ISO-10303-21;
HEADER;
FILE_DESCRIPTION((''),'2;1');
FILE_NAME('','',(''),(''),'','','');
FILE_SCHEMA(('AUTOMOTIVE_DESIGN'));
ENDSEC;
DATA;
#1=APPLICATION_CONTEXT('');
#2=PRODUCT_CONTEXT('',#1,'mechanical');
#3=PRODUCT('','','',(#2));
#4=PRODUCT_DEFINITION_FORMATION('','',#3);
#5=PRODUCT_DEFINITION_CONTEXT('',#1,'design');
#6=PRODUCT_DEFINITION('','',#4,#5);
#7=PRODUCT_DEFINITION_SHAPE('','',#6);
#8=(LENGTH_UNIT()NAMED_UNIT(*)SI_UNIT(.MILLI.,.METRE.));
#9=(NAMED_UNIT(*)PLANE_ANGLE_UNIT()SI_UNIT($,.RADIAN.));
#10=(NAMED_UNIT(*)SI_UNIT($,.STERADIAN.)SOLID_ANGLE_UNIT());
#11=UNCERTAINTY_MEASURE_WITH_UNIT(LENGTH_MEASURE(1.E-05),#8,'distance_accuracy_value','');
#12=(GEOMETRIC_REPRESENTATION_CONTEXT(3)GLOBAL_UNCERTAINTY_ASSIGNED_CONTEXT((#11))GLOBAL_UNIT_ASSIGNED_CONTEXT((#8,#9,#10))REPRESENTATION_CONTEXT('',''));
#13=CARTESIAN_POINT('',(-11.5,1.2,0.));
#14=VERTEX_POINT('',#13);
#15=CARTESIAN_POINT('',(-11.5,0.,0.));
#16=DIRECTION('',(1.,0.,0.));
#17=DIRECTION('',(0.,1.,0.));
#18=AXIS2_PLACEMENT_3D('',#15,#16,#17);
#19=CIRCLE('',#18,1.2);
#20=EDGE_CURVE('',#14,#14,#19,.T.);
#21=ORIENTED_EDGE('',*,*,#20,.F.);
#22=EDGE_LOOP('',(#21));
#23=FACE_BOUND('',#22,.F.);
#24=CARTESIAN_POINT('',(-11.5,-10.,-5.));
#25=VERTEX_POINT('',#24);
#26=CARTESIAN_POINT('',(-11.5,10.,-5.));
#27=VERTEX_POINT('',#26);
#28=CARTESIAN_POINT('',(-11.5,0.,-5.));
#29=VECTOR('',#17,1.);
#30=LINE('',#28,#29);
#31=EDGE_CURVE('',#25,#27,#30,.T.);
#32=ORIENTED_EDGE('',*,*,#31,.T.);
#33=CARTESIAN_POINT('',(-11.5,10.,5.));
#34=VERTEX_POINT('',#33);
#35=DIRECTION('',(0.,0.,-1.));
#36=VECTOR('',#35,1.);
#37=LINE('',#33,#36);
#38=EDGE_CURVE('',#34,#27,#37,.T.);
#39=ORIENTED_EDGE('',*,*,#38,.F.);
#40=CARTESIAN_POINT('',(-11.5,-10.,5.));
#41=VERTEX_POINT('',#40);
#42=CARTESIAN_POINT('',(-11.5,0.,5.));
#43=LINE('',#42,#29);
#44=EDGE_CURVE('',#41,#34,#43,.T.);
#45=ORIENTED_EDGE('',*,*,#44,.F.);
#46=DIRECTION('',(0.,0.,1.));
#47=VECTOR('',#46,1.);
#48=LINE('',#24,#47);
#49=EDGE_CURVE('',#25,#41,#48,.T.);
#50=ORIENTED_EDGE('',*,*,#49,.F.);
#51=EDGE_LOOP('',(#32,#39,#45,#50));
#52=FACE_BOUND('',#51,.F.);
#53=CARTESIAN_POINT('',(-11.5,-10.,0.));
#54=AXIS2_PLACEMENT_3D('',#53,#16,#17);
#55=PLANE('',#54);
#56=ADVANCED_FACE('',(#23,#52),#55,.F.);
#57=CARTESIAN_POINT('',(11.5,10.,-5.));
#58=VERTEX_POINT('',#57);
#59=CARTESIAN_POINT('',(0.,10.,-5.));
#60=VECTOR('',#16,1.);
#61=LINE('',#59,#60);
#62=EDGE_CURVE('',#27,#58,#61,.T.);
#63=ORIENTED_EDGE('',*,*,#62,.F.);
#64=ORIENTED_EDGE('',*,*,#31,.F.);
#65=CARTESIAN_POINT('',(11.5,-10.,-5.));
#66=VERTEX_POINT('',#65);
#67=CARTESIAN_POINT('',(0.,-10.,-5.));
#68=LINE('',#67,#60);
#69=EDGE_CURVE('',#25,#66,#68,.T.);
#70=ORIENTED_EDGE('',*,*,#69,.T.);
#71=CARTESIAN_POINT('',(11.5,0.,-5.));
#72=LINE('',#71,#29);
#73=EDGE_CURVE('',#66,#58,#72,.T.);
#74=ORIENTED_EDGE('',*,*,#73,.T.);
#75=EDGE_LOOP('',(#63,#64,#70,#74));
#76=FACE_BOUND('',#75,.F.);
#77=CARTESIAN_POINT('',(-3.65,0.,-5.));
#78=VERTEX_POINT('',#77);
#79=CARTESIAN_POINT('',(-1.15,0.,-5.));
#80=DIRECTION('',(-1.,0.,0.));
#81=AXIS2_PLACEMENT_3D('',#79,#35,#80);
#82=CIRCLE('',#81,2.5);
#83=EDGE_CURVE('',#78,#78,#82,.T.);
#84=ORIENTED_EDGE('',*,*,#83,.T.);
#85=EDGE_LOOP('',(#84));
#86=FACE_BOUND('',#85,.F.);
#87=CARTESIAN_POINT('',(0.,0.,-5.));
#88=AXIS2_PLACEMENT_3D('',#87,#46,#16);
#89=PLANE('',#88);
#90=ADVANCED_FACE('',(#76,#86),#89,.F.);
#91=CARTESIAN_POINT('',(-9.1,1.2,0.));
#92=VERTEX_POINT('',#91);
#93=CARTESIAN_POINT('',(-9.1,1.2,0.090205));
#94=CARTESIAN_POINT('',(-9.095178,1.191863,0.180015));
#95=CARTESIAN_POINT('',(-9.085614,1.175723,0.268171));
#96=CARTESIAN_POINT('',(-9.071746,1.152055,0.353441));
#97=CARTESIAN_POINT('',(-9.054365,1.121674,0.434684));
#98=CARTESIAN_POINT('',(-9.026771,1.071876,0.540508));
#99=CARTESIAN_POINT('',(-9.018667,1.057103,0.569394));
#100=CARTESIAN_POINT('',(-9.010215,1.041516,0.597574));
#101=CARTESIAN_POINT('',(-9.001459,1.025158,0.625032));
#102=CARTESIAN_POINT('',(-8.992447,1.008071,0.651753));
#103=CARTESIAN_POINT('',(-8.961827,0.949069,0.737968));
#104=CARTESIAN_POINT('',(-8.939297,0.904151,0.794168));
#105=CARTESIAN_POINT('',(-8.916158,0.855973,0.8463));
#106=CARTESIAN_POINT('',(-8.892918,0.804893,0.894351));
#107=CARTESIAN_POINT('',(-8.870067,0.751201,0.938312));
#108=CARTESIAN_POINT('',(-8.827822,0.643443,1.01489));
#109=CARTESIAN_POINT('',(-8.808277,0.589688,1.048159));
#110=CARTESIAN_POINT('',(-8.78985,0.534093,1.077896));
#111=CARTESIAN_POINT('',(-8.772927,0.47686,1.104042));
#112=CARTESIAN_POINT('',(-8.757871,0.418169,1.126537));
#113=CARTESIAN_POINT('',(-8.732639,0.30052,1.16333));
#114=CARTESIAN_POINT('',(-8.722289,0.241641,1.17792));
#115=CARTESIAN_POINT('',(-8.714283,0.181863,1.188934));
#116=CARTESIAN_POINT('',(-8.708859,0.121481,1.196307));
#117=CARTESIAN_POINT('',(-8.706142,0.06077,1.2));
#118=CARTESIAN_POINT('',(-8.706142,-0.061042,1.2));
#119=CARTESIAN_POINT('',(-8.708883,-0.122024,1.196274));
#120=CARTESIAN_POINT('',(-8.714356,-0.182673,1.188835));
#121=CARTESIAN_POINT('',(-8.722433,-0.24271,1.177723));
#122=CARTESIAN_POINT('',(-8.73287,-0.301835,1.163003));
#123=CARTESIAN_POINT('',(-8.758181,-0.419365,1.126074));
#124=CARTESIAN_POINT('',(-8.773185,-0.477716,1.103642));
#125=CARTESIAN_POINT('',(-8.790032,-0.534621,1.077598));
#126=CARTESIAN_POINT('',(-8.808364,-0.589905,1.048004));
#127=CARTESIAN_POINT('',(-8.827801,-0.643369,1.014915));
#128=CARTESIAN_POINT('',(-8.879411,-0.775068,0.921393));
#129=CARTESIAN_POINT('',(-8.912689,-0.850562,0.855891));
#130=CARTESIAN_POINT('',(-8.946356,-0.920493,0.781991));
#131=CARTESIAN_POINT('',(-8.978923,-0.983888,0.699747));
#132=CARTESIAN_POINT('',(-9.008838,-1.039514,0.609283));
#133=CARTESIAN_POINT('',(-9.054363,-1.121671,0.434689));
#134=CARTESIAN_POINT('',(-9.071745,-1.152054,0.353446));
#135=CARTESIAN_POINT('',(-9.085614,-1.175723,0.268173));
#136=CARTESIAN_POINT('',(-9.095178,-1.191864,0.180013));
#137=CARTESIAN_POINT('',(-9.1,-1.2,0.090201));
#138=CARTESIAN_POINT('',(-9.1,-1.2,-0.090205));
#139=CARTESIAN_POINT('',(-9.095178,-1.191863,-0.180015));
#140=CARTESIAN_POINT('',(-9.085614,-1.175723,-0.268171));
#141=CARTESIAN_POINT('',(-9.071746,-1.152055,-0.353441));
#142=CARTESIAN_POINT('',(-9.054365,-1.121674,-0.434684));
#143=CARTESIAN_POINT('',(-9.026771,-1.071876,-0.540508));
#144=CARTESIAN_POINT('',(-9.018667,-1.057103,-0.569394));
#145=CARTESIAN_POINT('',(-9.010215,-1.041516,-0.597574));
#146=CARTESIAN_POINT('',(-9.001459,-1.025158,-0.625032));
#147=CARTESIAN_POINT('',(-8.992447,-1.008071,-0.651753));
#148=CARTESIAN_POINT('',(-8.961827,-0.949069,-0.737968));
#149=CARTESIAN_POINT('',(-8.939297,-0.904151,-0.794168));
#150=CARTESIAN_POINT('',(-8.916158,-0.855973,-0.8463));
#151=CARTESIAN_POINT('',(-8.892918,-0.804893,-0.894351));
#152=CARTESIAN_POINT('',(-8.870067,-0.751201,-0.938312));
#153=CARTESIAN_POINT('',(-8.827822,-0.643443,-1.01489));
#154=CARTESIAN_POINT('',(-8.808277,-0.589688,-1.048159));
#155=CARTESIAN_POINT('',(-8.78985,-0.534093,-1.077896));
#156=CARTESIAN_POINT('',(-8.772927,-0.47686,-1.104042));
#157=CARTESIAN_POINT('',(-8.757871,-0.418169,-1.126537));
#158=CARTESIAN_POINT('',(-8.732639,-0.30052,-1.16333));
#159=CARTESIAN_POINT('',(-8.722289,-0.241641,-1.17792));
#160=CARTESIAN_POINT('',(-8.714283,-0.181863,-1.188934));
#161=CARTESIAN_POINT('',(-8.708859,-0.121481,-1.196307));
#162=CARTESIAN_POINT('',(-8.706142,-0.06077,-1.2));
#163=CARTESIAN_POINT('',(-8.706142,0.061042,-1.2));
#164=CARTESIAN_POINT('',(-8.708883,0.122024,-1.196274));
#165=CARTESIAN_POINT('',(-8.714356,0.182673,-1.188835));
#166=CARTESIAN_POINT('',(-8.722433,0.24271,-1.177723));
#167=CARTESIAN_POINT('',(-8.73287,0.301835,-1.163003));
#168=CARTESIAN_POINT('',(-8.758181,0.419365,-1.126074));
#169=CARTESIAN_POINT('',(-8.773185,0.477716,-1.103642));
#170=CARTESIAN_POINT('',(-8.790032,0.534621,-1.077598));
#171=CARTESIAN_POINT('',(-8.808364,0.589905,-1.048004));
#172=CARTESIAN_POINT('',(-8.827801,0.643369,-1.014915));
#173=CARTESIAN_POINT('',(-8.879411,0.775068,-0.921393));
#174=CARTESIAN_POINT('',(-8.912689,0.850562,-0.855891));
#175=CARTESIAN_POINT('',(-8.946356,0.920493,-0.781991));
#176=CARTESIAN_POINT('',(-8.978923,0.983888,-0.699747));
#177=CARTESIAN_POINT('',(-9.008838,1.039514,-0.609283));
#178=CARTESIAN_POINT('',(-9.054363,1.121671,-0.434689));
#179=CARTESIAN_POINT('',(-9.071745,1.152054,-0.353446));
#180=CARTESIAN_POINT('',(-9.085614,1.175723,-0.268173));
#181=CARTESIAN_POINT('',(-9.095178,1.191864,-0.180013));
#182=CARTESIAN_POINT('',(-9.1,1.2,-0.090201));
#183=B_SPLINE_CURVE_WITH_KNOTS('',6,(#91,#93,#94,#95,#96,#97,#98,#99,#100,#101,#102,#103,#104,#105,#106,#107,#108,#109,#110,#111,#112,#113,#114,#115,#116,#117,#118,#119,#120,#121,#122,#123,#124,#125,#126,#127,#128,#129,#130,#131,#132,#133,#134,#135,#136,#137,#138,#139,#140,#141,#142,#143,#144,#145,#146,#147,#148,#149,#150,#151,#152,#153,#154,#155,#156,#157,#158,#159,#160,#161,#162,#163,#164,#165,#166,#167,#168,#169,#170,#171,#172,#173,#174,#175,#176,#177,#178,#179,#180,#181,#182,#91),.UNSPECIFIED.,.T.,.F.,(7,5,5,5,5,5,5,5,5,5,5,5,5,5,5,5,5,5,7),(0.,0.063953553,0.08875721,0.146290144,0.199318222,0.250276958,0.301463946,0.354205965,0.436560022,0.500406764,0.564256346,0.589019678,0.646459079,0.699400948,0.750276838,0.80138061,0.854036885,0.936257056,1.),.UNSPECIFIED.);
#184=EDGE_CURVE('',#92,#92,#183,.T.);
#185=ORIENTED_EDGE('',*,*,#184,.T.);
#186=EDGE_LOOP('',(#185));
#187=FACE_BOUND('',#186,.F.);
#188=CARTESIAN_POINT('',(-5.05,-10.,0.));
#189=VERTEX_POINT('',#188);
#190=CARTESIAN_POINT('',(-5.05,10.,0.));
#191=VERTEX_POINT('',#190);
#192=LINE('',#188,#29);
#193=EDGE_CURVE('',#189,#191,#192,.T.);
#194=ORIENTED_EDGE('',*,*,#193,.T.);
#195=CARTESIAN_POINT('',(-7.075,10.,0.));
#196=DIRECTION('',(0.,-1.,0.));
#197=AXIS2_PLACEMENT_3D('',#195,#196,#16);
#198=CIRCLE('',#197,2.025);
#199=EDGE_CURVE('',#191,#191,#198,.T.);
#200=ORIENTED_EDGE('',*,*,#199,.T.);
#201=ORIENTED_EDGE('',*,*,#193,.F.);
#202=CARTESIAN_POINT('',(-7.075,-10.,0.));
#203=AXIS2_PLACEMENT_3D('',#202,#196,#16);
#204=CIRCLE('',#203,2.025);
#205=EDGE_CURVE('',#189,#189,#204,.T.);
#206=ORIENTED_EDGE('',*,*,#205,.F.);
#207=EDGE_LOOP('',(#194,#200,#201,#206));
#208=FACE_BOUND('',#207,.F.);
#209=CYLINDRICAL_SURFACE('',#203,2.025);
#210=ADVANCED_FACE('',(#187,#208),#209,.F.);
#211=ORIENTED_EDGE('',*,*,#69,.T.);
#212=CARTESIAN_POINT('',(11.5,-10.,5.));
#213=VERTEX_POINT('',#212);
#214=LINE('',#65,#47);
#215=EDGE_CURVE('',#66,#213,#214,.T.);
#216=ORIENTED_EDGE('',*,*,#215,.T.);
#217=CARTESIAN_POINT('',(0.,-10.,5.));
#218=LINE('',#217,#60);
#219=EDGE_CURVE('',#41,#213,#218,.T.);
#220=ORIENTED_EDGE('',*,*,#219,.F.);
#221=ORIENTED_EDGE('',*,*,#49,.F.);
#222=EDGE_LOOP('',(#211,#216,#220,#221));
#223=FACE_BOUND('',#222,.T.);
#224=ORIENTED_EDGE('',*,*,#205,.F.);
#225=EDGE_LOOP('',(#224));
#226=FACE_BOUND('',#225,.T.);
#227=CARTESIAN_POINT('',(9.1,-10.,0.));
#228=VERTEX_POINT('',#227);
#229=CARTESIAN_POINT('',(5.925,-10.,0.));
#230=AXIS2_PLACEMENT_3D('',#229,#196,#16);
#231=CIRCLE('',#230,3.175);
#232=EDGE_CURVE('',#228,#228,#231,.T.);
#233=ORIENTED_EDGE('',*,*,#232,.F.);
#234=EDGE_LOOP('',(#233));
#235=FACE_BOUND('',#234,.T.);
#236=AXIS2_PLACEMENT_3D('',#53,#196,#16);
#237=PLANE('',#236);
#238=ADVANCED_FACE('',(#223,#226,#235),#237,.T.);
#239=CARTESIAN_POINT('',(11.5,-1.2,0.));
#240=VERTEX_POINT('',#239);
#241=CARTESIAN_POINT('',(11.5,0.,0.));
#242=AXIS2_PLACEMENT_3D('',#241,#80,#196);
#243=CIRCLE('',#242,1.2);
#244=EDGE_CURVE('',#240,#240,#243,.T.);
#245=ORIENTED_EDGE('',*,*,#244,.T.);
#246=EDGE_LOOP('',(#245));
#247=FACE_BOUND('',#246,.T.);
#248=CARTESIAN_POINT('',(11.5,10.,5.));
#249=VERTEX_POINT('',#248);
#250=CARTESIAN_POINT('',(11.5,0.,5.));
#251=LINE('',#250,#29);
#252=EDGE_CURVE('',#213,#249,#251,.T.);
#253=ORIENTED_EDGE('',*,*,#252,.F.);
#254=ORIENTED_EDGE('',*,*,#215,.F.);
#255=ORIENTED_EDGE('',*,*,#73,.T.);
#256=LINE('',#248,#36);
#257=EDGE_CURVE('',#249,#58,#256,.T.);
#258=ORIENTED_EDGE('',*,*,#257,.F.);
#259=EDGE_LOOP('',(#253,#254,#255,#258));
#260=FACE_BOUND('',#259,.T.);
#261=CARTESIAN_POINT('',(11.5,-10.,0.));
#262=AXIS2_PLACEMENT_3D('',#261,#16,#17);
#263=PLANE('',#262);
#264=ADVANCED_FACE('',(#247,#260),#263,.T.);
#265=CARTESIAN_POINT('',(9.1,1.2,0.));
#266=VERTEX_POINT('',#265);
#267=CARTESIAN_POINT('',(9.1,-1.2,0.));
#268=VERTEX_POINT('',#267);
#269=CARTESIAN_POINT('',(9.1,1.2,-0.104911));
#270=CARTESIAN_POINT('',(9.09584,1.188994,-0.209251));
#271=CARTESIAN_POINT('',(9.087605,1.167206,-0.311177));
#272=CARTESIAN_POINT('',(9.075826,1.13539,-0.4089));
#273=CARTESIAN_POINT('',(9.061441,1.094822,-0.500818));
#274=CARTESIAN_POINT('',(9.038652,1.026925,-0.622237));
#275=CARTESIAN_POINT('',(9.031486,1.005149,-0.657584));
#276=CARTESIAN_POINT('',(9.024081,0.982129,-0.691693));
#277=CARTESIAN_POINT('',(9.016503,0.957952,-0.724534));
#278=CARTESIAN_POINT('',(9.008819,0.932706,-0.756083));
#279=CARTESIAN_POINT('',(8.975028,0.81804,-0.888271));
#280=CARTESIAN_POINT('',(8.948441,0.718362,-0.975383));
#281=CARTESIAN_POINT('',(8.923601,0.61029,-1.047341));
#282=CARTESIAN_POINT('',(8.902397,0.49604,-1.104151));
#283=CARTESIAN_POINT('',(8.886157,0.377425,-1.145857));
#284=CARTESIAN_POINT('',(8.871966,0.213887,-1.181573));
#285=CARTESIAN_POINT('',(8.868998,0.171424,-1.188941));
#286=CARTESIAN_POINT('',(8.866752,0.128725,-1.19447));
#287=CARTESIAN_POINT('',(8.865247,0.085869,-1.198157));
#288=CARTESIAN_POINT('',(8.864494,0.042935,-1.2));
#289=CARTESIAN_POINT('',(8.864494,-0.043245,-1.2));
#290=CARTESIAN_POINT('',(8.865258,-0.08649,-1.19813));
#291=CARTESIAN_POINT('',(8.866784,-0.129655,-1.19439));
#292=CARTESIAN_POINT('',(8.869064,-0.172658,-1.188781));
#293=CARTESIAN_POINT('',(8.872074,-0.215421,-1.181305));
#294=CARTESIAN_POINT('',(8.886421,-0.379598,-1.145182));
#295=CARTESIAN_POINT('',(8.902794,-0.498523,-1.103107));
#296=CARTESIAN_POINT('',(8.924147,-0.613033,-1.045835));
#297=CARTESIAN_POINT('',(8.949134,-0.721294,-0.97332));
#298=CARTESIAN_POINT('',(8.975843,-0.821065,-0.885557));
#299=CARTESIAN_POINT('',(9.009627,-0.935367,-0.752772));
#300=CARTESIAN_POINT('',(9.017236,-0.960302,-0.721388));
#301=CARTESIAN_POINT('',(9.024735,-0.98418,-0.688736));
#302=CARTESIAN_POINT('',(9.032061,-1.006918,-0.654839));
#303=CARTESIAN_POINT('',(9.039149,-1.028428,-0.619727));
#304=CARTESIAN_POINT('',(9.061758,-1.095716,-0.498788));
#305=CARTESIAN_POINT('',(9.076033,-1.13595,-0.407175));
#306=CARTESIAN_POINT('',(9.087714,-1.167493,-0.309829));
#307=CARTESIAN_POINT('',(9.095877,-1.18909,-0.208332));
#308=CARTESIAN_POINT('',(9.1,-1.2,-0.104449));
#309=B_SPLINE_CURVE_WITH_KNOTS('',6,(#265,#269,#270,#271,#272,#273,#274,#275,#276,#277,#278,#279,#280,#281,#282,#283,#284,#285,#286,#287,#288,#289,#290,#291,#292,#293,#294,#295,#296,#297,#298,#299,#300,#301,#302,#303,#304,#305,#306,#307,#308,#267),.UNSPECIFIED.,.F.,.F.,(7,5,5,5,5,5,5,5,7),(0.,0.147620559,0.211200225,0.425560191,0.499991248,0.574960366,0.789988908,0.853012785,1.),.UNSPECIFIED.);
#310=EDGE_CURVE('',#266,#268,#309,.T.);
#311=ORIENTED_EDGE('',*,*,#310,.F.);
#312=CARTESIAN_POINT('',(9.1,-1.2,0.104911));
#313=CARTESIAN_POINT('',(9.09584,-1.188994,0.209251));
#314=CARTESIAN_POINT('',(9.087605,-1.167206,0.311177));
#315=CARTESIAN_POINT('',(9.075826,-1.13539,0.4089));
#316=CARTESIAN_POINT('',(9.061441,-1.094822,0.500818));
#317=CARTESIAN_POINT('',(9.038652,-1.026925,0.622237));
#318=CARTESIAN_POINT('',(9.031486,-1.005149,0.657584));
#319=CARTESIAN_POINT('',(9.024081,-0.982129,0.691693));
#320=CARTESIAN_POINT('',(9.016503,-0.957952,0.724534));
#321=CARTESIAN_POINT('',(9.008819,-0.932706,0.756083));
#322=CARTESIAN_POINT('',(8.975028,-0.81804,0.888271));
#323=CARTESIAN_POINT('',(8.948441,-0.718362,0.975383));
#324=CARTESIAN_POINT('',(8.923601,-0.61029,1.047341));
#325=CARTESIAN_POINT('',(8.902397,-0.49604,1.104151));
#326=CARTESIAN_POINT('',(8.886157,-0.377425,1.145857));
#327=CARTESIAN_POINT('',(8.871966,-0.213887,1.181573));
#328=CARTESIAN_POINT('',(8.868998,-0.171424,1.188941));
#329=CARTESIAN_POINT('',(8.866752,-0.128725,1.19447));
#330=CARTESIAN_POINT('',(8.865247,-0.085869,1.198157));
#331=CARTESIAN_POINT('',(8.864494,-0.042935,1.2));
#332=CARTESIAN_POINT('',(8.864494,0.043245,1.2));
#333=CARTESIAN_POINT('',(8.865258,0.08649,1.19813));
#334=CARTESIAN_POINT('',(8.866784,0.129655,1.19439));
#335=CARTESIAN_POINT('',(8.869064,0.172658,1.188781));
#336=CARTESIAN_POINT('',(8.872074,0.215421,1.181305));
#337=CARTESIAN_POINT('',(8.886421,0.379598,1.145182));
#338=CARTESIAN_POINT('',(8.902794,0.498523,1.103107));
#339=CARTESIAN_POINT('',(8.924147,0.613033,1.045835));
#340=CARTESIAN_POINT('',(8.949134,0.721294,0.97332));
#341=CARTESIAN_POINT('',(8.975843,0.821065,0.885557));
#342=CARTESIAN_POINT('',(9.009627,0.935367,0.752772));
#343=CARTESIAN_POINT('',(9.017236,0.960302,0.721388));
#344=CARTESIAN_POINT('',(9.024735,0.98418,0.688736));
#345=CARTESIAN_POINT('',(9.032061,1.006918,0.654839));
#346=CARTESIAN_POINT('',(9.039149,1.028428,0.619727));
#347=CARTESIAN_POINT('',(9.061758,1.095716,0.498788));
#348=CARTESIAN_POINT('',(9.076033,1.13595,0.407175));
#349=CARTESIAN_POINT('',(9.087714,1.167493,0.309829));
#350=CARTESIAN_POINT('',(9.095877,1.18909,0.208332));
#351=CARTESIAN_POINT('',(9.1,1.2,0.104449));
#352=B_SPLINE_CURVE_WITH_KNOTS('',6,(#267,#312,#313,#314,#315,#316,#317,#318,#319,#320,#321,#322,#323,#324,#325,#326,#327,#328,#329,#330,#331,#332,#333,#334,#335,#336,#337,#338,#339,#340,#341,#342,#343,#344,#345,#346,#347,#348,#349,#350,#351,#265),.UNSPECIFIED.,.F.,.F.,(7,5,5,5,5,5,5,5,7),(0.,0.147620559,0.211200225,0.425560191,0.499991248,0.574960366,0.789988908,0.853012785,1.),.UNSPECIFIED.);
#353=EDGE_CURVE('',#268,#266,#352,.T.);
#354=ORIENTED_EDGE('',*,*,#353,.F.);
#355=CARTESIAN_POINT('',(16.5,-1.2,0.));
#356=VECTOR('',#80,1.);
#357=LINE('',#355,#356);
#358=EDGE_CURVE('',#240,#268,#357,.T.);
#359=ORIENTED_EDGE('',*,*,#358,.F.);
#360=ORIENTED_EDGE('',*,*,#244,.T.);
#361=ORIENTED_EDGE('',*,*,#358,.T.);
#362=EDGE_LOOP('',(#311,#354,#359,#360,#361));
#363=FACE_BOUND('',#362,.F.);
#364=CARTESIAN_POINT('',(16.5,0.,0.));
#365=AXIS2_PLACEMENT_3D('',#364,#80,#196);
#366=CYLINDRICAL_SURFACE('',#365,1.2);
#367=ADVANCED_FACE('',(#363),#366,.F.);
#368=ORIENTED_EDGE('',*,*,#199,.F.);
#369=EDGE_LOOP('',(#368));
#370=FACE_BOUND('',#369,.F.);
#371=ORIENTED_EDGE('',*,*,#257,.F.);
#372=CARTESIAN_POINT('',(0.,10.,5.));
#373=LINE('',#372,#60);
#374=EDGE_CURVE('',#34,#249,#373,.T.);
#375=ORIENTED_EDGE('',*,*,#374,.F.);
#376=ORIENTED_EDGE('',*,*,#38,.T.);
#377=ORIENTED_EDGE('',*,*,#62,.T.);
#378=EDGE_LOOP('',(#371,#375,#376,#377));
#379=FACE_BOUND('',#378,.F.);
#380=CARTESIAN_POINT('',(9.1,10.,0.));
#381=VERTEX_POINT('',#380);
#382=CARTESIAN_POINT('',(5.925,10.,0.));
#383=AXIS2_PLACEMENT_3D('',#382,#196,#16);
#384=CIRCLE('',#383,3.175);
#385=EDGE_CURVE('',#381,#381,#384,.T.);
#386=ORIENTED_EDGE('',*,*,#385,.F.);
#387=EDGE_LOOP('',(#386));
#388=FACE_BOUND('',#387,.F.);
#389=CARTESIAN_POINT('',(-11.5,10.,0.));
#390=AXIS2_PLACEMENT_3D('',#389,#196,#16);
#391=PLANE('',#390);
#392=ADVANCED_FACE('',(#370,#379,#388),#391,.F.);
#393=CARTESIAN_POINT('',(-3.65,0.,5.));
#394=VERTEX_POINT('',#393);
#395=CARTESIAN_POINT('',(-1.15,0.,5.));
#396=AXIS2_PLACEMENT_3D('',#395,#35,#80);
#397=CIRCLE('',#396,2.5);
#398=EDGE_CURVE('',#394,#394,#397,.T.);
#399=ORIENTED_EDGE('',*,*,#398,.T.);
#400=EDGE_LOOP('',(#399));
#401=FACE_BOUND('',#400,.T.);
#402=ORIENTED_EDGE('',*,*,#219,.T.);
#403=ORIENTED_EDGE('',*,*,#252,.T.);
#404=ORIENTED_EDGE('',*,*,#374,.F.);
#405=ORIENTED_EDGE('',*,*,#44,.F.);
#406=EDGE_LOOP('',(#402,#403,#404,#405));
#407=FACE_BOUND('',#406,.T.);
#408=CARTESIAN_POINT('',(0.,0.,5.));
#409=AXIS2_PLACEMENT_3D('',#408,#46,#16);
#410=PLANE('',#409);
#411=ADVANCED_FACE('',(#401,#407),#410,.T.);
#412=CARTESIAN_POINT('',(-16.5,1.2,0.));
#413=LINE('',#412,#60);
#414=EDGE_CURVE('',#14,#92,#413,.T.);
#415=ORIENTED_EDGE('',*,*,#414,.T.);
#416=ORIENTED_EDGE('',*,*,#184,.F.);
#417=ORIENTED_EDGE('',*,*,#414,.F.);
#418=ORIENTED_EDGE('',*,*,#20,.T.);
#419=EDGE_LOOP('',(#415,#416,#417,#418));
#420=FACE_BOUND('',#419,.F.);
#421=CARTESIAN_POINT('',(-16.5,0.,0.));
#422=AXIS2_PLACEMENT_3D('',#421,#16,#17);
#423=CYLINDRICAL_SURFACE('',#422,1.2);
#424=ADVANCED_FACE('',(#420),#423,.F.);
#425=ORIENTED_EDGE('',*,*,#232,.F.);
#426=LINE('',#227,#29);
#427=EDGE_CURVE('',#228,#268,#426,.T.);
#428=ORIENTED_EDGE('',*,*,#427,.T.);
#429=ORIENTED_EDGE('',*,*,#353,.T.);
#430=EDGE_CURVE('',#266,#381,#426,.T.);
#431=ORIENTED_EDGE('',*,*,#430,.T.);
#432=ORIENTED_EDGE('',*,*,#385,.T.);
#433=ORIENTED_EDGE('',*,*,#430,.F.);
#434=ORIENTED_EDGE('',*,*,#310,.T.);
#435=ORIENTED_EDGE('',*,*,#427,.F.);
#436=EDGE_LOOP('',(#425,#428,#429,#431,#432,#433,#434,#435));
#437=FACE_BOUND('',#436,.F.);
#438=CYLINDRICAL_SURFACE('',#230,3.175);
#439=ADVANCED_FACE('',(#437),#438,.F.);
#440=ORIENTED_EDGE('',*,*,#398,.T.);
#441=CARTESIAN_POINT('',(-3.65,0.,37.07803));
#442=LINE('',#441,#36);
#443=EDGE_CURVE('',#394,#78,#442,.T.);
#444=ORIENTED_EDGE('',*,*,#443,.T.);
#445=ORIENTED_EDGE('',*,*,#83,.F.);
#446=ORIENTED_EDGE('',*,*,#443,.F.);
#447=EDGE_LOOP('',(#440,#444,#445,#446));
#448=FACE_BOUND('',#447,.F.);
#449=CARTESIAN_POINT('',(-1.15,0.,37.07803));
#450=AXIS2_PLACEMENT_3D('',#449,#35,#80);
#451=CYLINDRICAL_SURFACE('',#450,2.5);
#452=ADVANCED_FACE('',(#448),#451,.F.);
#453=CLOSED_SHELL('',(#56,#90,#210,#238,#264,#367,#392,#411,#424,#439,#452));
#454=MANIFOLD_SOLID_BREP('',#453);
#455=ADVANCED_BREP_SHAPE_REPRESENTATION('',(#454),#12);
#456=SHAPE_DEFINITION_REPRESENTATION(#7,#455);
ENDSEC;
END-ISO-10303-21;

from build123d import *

# Parameters (mm, degrees)
F0_W     = 23
F0_H     = 20
F1_DEPTH = 5
F2_R     = 2.025
F2_R_2   = 3.175
F3_DEPTH = 25
F5_D     = 5
F7_D     = 2.4
F7_DEPTH = 5
F7_TIP   = 0.7210327428
F9_D     = 2.4
F9_DEPTH = 5
F9_TIP   = 0.7210327428


with BuildPart() as f1:
    # F0 (on Top) → F1 (new body, symmetric)
    with BuildSketch(Plane.XY):
        Rectangle(F0_W, F0_H)
    extrude(amount=F1_DEPTH, both=True)

    # F2 (on face) → F3 (cut)
    with BuildSketch(Plane.XZ.offset(10)):
        with Locations((-7.075, 0)):
            Circle(F2_R)
        with Locations((5.925, 0)):
            Circle(F2_R_2)
    extrude(amount=-F3_DEPTH, mode=Mode.SUBTRACT)

    # F5 (through all)
    with Locations(Plane.XY.offset(5)):
        with Locations((-1.15, 0)):
            Hole(F5_D / 2)

    # F7
    with Locations(Plane(origin=(-11.5, 0, 0), x_dir=(0, -1, 0), z_dir=(-1, 0, 0))):
        with Locations((0, 0)):
            Hole(F7_D / 2, depth=F7_DEPTH)
            with Locations((0, 0, -(F7_DEPTH + F7_TIP / 2))):  # 118° drill point
                Cone(0, F7_D / 2, F7_TIP, mode=Mode.SUBTRACT)

    # F9
    with Locations(Plane.YZ.offset(11.5)):
        with Locations((0, 0)):
            Hole(F9_D / 2, depth=F9_DEPTH)
            with Locations((0, 0, -(F9_DEPTH + F9_TIP / 2))):  # 118° drill point
                Cone(0, F9_D / 2, F9_TIP, mode=Mode.SUBTRACT)


solid = f1.part
